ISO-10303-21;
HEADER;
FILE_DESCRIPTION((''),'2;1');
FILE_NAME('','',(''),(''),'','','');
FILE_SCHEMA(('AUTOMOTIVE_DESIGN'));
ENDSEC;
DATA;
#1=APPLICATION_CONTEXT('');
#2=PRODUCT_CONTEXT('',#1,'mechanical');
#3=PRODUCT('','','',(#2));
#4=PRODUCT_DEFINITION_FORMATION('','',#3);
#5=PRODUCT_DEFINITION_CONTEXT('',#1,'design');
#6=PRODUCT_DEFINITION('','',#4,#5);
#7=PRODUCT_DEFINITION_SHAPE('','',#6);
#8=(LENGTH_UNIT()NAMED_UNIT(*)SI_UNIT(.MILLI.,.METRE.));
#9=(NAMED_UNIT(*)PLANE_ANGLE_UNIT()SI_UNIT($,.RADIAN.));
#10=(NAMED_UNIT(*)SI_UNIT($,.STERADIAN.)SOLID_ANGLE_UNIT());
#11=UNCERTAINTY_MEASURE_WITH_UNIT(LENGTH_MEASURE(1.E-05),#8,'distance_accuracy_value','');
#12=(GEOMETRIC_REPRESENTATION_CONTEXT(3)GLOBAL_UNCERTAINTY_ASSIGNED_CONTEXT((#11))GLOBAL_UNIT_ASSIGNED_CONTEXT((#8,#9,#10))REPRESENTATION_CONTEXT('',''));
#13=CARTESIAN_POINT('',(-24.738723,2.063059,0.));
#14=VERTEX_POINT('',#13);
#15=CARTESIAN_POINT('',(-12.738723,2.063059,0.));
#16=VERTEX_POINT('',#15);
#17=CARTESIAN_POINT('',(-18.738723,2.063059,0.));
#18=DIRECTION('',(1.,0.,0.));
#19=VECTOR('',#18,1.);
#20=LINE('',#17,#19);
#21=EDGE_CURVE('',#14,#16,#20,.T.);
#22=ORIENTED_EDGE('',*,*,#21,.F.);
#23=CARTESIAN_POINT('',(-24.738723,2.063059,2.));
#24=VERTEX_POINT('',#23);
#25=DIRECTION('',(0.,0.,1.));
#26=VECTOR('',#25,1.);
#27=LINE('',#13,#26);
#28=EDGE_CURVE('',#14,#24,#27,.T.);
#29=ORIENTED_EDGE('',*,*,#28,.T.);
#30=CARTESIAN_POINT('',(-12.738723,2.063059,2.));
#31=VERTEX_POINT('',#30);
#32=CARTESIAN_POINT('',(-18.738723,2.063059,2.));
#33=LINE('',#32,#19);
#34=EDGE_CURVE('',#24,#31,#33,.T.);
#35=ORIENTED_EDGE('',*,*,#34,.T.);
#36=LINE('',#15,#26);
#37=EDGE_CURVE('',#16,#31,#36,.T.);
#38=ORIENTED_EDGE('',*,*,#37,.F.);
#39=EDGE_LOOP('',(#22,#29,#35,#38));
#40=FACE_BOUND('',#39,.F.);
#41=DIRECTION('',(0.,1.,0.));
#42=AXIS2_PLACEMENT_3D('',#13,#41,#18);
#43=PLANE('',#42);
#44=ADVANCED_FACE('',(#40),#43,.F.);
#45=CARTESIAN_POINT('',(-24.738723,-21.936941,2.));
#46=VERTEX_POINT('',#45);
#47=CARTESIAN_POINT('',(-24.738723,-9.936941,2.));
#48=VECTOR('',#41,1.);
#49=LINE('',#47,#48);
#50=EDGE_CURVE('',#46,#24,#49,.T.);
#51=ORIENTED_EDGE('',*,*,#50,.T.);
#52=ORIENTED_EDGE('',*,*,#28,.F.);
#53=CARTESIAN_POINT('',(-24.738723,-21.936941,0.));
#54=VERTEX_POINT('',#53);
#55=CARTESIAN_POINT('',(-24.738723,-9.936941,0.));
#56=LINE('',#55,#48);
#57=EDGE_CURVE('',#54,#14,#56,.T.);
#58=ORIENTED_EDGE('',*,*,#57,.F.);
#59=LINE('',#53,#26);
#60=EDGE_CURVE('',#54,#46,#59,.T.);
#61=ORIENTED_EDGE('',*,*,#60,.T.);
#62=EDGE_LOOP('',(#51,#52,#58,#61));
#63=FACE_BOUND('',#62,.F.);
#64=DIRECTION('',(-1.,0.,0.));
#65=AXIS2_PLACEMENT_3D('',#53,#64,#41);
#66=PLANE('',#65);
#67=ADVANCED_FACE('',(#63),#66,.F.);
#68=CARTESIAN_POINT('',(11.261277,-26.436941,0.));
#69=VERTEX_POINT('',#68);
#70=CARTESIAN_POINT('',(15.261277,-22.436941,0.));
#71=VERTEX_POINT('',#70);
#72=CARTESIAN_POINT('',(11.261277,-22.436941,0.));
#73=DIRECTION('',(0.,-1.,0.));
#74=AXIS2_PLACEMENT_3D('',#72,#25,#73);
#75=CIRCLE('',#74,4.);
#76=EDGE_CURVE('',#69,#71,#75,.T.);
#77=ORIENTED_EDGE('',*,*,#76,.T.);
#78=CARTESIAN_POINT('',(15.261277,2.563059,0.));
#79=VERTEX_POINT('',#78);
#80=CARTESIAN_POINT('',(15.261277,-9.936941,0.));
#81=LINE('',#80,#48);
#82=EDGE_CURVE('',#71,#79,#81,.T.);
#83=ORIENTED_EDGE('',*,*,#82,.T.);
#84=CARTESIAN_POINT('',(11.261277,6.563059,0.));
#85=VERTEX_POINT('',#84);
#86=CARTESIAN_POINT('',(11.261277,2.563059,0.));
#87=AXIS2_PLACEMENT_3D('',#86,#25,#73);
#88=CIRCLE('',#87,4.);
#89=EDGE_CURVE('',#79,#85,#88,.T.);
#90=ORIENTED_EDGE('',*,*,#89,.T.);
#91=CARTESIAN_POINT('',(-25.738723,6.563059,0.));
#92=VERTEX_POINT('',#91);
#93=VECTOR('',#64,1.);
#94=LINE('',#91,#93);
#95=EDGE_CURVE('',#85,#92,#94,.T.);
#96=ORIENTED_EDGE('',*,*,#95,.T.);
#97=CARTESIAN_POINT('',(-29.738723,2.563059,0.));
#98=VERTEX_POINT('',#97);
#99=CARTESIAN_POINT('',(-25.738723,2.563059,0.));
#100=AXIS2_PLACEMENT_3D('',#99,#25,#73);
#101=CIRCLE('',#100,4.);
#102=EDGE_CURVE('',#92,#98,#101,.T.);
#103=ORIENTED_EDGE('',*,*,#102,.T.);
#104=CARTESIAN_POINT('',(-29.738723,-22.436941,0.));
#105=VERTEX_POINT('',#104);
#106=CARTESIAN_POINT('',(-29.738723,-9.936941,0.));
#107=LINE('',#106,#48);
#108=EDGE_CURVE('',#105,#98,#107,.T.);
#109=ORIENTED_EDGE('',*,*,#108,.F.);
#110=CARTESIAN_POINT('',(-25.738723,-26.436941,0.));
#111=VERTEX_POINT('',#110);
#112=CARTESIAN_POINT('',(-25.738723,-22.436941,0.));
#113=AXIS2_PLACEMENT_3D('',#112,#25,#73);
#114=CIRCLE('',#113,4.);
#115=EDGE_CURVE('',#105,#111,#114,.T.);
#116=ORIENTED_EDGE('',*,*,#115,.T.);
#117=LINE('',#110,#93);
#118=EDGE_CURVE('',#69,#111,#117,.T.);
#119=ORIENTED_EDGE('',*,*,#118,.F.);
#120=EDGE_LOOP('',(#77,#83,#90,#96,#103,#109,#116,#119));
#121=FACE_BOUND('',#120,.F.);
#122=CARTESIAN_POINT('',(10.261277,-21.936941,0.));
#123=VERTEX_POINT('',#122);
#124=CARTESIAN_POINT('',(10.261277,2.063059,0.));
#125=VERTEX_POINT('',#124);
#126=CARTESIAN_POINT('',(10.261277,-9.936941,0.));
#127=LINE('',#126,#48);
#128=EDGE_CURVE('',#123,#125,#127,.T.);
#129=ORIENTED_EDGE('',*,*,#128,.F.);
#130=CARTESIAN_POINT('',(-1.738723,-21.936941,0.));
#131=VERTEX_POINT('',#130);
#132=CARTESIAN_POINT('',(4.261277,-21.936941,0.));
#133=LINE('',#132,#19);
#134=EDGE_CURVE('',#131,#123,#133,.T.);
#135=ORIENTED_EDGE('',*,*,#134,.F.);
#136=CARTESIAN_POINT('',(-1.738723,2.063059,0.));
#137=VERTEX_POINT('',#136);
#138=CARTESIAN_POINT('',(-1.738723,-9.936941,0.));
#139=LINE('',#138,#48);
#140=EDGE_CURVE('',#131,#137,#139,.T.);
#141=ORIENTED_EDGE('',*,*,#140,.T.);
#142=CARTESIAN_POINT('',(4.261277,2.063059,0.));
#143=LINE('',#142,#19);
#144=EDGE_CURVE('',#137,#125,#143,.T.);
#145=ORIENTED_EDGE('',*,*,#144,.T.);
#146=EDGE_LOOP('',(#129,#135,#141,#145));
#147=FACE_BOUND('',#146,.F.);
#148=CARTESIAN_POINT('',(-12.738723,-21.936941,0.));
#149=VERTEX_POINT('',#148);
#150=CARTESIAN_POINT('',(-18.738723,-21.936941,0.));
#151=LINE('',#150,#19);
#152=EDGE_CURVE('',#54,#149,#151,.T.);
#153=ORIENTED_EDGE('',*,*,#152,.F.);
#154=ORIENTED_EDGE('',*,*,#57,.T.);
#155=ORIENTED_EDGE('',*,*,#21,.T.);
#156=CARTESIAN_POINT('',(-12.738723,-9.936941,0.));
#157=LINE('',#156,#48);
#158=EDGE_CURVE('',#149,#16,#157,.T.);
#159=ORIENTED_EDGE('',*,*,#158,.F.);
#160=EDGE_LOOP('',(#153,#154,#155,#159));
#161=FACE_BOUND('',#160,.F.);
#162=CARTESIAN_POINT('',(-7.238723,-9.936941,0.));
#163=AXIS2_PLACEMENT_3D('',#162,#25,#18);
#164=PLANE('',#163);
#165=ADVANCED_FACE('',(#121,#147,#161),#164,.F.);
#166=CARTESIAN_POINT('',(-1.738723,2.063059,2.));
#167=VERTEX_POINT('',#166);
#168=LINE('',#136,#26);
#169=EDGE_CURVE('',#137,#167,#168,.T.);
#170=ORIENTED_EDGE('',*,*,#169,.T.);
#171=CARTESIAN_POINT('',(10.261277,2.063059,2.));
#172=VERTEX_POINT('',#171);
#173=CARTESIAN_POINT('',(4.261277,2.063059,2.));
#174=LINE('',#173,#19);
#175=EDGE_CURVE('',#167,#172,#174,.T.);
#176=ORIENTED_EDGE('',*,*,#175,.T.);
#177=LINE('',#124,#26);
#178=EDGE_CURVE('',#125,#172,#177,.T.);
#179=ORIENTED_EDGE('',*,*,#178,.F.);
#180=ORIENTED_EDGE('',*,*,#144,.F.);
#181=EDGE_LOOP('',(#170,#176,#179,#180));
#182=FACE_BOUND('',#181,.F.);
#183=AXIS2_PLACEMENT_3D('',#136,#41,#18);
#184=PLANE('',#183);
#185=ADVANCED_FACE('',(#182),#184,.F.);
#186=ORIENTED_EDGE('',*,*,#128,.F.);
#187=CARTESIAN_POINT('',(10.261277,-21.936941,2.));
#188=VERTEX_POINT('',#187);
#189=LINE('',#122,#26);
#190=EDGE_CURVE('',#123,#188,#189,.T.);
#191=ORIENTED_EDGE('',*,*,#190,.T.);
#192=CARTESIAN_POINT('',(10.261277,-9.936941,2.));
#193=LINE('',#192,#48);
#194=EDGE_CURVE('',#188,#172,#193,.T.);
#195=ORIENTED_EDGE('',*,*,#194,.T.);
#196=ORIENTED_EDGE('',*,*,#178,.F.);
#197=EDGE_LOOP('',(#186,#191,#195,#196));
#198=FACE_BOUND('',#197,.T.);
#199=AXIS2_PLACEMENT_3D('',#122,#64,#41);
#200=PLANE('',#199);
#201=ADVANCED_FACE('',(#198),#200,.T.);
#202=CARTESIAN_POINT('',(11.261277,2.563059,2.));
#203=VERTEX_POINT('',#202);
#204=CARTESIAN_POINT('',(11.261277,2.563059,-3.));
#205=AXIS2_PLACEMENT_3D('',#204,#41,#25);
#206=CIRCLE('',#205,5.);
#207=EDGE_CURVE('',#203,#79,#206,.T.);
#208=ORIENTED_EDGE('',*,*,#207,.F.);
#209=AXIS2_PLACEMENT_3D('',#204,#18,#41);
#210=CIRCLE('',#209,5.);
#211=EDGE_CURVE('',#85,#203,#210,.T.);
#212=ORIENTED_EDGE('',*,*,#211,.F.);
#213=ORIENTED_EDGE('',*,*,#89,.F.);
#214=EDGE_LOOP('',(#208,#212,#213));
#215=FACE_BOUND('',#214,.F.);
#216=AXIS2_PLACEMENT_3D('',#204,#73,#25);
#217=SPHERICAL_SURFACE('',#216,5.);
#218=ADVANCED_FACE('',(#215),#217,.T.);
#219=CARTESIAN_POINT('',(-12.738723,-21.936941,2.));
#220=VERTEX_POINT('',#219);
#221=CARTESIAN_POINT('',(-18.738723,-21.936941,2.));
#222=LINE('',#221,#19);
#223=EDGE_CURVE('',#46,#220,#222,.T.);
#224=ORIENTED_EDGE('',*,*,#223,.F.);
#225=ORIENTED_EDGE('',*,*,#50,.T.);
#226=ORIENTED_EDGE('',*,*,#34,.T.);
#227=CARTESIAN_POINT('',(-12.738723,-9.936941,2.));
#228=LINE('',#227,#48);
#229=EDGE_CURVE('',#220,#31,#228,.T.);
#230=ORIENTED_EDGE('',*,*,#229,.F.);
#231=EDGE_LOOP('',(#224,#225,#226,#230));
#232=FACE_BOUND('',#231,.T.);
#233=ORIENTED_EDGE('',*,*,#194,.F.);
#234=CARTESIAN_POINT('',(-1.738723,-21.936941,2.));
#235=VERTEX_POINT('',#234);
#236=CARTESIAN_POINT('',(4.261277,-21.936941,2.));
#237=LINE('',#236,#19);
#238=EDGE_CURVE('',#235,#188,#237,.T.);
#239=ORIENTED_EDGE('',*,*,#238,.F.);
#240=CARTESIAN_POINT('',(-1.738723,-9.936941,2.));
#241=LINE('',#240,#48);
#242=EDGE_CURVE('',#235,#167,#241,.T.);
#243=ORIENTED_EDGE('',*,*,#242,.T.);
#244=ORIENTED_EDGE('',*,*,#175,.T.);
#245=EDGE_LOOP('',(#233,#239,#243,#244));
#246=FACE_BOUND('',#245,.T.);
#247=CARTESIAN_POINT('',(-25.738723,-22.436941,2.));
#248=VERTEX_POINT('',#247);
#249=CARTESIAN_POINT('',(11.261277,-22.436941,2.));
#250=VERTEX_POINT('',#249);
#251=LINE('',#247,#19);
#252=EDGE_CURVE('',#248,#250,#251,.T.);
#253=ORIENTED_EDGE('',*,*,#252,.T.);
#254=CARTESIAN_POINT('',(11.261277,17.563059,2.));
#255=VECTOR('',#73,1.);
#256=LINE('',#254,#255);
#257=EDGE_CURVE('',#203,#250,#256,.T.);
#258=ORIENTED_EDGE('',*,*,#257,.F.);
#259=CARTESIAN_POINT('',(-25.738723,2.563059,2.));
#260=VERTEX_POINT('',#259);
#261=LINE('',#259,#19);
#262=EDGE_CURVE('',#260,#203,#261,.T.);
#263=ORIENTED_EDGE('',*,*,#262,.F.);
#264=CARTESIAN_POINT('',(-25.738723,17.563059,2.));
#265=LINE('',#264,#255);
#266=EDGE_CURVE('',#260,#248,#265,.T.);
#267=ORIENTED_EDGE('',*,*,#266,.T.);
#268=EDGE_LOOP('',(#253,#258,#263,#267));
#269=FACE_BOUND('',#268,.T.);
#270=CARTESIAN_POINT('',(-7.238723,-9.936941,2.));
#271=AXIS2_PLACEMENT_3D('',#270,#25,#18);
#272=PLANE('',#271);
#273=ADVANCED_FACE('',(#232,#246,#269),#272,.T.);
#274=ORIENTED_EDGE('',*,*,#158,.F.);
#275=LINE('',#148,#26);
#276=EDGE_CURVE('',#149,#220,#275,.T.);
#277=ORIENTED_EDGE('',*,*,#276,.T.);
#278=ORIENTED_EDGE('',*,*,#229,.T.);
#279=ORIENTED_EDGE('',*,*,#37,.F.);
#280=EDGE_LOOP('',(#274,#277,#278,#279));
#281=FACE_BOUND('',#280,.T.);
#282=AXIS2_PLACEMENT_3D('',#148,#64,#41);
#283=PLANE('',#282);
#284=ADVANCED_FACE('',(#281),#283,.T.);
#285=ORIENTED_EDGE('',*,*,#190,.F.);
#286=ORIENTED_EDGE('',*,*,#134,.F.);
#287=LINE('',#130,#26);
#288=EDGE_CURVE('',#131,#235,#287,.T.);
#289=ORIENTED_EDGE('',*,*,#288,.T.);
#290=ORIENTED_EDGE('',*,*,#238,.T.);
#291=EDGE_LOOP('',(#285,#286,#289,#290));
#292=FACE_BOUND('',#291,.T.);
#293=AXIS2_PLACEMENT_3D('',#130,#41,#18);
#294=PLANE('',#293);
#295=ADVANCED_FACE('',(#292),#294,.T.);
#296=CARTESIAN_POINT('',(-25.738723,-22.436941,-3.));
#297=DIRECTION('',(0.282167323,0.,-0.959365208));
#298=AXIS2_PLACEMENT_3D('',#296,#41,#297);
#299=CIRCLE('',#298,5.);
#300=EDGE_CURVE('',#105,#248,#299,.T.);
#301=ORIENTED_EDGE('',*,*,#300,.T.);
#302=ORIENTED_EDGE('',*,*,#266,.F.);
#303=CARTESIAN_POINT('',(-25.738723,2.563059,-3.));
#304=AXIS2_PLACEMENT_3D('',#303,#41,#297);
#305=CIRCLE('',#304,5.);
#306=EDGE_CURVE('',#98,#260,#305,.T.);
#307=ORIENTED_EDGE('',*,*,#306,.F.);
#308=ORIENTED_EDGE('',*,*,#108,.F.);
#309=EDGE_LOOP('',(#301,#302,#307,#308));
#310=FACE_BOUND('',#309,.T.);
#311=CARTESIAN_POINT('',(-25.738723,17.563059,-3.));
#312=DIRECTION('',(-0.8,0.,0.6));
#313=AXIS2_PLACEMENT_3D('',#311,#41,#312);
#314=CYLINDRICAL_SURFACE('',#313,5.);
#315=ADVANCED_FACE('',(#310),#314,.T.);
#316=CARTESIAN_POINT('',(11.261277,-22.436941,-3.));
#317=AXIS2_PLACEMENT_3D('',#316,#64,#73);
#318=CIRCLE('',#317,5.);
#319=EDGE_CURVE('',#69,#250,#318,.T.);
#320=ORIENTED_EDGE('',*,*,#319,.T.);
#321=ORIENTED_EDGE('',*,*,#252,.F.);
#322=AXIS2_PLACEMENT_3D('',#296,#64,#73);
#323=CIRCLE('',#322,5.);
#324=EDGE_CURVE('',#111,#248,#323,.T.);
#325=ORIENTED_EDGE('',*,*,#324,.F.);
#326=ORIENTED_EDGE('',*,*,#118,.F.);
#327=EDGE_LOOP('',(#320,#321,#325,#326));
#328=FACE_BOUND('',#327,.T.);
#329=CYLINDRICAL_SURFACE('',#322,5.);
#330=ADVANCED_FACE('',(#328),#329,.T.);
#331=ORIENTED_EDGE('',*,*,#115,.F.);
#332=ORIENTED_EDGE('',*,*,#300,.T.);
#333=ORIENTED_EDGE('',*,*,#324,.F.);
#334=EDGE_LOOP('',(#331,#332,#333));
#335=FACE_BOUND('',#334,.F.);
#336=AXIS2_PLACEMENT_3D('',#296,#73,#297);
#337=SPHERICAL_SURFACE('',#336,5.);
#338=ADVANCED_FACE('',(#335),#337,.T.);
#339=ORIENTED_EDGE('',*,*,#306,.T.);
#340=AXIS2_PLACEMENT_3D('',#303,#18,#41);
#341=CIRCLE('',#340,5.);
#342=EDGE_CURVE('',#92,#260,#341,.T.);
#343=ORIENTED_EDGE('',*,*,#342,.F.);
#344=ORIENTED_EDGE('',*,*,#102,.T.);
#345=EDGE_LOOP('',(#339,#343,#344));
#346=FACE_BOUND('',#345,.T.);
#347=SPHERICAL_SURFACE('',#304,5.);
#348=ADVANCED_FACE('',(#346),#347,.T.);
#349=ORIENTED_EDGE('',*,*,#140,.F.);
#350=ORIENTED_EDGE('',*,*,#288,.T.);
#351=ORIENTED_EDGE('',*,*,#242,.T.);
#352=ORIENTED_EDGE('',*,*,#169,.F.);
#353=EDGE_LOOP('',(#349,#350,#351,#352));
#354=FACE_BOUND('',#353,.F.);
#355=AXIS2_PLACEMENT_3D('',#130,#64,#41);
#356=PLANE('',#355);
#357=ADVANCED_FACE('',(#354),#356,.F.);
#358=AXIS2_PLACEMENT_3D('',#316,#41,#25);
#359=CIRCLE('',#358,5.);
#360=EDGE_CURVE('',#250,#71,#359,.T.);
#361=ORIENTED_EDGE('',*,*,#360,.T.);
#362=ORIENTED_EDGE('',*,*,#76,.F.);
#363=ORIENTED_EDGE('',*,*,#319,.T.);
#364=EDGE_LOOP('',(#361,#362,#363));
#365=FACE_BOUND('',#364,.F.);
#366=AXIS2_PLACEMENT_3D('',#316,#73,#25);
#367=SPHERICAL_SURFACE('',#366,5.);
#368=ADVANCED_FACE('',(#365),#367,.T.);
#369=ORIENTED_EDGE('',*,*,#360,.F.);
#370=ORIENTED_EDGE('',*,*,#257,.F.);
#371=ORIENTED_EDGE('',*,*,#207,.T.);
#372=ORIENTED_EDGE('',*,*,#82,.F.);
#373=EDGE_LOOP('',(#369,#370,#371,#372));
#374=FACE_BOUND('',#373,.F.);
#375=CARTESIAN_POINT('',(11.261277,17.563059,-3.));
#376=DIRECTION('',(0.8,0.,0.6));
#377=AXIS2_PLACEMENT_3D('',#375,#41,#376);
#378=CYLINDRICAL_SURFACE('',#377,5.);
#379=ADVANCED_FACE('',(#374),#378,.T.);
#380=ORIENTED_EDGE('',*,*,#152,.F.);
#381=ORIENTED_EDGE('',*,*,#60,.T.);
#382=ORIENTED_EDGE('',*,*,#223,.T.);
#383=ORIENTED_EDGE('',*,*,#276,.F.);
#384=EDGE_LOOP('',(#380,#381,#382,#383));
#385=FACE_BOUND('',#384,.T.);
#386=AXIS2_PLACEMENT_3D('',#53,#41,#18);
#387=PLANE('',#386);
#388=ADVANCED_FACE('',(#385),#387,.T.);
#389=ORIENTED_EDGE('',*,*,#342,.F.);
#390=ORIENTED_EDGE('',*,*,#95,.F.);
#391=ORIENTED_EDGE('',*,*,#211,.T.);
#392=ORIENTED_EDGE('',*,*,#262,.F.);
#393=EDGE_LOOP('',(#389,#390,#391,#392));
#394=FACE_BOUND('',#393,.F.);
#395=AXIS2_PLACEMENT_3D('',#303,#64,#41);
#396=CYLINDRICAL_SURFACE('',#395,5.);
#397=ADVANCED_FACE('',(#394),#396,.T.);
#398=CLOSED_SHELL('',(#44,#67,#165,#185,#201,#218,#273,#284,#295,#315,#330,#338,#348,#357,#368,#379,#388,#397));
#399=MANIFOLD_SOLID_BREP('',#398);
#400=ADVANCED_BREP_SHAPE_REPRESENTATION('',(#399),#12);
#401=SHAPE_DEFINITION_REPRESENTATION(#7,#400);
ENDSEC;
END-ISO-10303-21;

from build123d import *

# Parameters (mm, degrees)
F1_W        = 45
F1_H        = 35
F1_W_2      = 12
F1_H_2      = 24
F2_DEPTH    = 2
F3_T1_DEPTH = 55
F4_T1_DEPTH = 55
F5_T1_DEPTH = 37
F5_T4_ANGLE = 196.3896000127
F5_T6_ANGLE = 196.3896000127
F6_T1_DEPTH = 37
F6_T4_ANGLE = 196.3896000127
F6_T6_ANGLE = 196.3896000127


# Not quite as in the source:
# - a fillet or chamfer that OpenCascade refuses, or shapes differently, is made with other operations: its cross-section is extruded or revolved along the edge and cut away or added


with BuildPart() as f2:
    # F1 (on face) → F2 (new body)
    with BuildSketch(Plane.XY):
        with Locations((-7.2387225181, -9.9369412684)):
            Rectangle(F1_W, F1_H)
        with Locations((-18.7387225181, -9.9369412684)):
            Rectangle(F1_W_2, F1_H_2, mode=Mode.SUBTRACT)
        with Locations((4.2612774819, -9.9369412684)):
            Rectangle(F1_W_2, F1_H_2, mode=Mode.SUBTRACT)
    extrude(amount=F2_DEPTH)

    # F3: fillet of radius 5 on 1 edges, made by hand

    # F3_s2 → F3_t1 (cut)
    with BuildSketch(Plane.XZ.offset(-17.5630587316)):
        with BuildLine():
            ThreePointArc((-29.7387225181, 0), (-27.9747904956, 1.472135955), (-25.7387225181, 2))
            Line((-25.7387225181, 2), (-29.7387225181, 2))
            Line((-29.7387225181, 2), (-29.7387225181, 0))
        make_face()
    extrude(amount=F3_T1_DEPTH, mode=Mode.SUBTRACT)

    # F4: fillet of radius 5 on 1 edges, made by hand

    # F4_s2 → F4_t1 (cut)
    with BuildSketch(Plane.XZ.offset(-17.5630587316)):
        with BuildLine():
            ThreePointArc((15.2612774819, 0), (13.4973454594, 1.472135955), (11.2612774819, 2))
            Line((11.2612774819, 2), (15.2612774819, 2))
            Line((15.2612774819, 2), (15.2612774819, 0))
        make_face()
    extrude(amount=F4_T1_DEPTH, mode=Mode.SUBTRACT)

    # F5: fillet of radius 5 on 1 edges, made by hand

    # F5_s2 → F5_t1 (cut)
    with BuildSketch(Plane.YZ.offset(-25.7387225181)):
        with BuildLine():
            ThreePointArc((-27.4369412684, -3), (-25.9724751743, 0.5355339059), (-22.4369412684, 2))
            Line((-22.4369412684, 2), (-27.4369412684, 2))
            Line((-27.4369412684, 2), (-27.4369412684, -3))
        make_face()
    extrude(amount=F5_T1_DEPTH, mode=Mode.SUBTRACT)

    # F5_s3 → F5_t4 (revolve, cut)
    with BuildSketch(Plane(origin=(-24.5015511946, 0, -7.2063663149), x_dir=(0, 1, 0), z_dir=(0.9593652077, 0, 0.2821673233))):
        with BuildLine():
            ThreePointArc((-22.4369412684, -0.615469186), (-25.9724751743, 0.848996908), (-27.4369412684, 4.384530814))
            Line((-27.4369412684, 4.384530814), (-27.4369412684, -0.615469186))
            Line((-27.4369412684, -0.615469186), (-22.4369412684, -0.615469186))
        make_face()
    revolve(axis=Axis((-25.7387225181, -27.4369412684, -3), (0, 1, 0)), revolution_arc=F5_T4_ANGLE, mode=Mode.SUBTRACT)

    # F5_s5 → F5_t6 (revolve, cut)
    with BuildSketch(Plane.YZ.offset(11.2612774819)):
        with BuildLine():
            ThreePointArc((-22.4369412684, 2), (-25.9724751743, 0.5355339059), (-27.4369412684, -3))
            Line((-27.4369412684, -3), (-27.4369412684, 2))
            Line((-27.4369412684, 2), (-22.4369412684, 2))
        make_face()
    revolve(axis=Axis((11.2612774819, -27.4369412684, -3), (0, 1, 0)), revolution_arc=F5_T6_ANGLE, mode=Mode.SUBTRACT)

    # F6: fillet of radius 5 on 1 edges, made by hand

    # F6_s2 → F6_t1 (cut)
    with BuildSketch(Plane.YZ.offset(-25.7387225181)):
        with BuildLine():
            ThreePointArc((7.5630587316, -3), (6.0985926376, 0.5355339059), (2.5630587316, 2))
            Line((2.5630587316, 2), (7.5630587316, 2))
            Line((7.5630587316, 2), (7.5630587316, -3))
        make_face()
    extrude(amount=F6_T1_DEPTH, mode=Mode.SUBTRACT)

    # F6_s3 → F6_t4 (revolve, cut)
    with BuildSketch(Plane.YZ.offset(11.2612774819)):
        with BuildLine():
            ThreePointArc((7.5630587316, -3), (6.0985926376, 0.5355339059), (2.5630587316, 2))
            Line((2.5630587316, 2), (7.5630587316, 2))
            Line((7.5630587316, 2), (7.5630587316, -3))
        make_face()
    revolve(axis=Axis((11.2612774819, 7.5630587316, -3), (0, 1, 0)), revolution_arc=F6_T4_ANGLE, mode=Mode.SUBTRACT)

    # F6_s5 → F6_t6 (revolve, cut)
    with BuildSketch(Plane(origin=(-24.5015511946, 0, -7.2063663149), x_dir=(0, 1, 0), z_dir=(0.9593652077, 0, 0.2821673233))):
        with BuildLine():
            ThreePointArc((2.5630587316, -0.615469186), (6.0985926376, 0.848996908), (7.5630587316, 4.384530814))
            Line((7.5630587316, 4.384530814), (7.5630587316, -0.615469186))
            Line((7.5630587316, -0.615469186), (2.5630587316, -0.615469186))
        make_face()
    revolve(axis=Axis((-25.7387225181, 7.5630587316, -3), (0, 1, 0)), revolution_arc=F6_T6_ANGLE, mode=Mode.SUBTRACT)


solid = f2.part
